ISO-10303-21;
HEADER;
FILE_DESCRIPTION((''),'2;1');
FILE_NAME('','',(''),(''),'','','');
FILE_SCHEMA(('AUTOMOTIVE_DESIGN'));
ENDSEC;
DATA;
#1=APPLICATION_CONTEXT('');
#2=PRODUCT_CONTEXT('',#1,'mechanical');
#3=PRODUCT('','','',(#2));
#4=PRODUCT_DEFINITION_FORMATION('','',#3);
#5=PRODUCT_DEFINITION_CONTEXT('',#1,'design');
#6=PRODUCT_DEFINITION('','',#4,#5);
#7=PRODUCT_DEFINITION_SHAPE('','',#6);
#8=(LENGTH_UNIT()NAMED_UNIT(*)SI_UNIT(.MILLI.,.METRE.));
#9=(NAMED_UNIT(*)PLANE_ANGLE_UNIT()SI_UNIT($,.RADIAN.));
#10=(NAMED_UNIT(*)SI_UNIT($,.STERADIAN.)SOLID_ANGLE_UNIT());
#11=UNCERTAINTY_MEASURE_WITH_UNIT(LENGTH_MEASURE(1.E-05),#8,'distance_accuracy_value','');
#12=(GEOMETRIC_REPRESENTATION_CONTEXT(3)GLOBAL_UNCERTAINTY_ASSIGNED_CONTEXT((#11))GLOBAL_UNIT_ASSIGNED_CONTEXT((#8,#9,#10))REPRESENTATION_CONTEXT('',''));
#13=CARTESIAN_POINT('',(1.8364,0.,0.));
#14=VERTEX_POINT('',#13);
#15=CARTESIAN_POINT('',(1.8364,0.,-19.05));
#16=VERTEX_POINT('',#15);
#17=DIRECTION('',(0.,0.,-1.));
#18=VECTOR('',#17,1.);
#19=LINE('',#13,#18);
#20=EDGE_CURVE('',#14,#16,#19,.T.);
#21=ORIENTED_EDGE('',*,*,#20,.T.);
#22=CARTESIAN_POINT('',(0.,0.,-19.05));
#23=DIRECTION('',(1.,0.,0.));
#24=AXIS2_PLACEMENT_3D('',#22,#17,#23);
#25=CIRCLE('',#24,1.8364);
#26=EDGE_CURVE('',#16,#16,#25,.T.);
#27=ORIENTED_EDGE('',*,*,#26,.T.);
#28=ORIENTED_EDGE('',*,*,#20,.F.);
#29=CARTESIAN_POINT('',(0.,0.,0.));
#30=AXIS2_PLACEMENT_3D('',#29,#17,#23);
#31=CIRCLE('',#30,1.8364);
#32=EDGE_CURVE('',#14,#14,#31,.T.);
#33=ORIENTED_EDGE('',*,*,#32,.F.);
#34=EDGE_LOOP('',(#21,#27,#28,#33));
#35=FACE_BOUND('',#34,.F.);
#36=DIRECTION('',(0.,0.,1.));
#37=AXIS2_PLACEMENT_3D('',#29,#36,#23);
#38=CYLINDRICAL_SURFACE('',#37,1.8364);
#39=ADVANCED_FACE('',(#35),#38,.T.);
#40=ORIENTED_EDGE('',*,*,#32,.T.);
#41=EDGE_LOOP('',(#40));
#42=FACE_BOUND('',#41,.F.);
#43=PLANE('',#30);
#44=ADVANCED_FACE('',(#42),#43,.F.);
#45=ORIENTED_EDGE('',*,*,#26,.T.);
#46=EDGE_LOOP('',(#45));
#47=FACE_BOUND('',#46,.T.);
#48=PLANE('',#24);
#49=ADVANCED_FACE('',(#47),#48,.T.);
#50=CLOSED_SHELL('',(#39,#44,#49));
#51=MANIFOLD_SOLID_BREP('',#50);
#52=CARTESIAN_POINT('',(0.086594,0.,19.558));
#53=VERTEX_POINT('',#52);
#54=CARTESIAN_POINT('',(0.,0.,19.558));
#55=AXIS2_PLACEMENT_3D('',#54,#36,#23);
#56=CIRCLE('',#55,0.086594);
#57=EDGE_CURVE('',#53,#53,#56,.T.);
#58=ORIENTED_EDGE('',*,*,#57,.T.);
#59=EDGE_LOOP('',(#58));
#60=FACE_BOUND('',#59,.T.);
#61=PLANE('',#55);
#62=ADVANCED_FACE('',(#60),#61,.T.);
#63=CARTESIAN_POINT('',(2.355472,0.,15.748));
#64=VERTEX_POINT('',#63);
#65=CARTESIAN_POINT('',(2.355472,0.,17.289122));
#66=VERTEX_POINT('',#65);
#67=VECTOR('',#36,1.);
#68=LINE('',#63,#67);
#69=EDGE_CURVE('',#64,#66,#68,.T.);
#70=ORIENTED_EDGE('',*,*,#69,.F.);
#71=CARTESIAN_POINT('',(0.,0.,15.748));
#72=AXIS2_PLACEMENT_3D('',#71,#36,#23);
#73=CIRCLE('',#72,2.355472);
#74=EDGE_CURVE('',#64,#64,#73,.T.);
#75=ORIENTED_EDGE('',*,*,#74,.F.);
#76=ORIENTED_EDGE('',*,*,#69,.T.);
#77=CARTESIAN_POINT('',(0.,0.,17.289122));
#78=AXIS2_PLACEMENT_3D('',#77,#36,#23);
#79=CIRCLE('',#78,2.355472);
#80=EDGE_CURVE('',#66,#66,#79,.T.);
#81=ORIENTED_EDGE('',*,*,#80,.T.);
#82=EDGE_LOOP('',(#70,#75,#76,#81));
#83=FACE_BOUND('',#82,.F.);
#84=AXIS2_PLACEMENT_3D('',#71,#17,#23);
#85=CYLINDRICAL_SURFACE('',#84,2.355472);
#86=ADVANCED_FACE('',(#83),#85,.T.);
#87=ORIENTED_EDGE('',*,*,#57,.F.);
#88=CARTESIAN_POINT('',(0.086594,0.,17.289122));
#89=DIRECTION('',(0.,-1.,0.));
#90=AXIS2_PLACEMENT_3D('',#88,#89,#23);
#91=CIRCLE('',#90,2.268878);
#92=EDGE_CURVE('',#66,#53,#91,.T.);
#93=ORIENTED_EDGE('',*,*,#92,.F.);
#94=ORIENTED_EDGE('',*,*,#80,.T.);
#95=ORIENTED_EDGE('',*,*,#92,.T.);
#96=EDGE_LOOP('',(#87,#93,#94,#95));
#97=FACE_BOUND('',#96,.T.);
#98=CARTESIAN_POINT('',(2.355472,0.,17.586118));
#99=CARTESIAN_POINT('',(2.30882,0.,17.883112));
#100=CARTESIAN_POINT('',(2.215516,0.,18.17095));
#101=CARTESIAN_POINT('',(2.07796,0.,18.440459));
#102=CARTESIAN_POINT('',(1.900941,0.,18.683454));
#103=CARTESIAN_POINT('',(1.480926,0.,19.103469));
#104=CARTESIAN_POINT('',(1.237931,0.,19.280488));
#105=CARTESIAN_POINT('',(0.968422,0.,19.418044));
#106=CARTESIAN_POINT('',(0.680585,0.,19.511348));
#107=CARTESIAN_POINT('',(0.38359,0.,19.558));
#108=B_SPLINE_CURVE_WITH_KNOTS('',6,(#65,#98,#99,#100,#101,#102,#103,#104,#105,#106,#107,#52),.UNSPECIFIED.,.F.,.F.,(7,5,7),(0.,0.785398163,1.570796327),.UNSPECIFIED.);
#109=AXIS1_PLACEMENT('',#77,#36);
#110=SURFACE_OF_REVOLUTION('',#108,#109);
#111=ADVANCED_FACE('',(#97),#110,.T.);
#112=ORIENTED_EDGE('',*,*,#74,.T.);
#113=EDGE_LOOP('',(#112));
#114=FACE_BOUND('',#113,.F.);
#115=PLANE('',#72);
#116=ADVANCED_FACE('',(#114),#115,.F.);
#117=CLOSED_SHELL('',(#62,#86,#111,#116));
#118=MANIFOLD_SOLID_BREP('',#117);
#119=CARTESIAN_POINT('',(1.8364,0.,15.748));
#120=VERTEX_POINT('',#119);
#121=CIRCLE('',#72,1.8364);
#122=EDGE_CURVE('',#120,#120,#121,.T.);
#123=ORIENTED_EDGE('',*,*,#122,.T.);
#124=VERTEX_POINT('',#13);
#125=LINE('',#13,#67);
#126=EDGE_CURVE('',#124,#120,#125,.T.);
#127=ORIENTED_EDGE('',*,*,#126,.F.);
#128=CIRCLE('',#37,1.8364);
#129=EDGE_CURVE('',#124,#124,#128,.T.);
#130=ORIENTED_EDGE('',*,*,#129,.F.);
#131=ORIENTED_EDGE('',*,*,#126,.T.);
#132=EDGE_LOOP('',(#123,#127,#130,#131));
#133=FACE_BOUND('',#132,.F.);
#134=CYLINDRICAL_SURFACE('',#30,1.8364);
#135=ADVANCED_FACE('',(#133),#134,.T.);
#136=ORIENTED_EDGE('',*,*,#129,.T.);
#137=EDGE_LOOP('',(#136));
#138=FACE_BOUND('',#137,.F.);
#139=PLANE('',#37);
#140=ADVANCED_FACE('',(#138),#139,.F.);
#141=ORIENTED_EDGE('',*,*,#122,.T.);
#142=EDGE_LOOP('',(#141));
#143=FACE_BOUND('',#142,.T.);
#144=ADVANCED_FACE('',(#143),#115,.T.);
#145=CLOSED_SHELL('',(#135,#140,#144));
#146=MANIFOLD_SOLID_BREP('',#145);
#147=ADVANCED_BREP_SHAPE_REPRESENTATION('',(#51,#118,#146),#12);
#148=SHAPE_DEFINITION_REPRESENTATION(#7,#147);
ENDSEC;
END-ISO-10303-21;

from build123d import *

# Parameters (mm, degrees)
F0_R     = 1.8364004546
F1_DEPTH = 15.748
F2_R     = 2.355472205
F2_R_2   = 1.8364004546
F3_DEPTH = 3.81
F4_R     = 2.2688779059
F5_R     = 1.8364004546
F6_DEPTH = 19.05


with BuildPart() as f1:
    # F0 (on Top) → F1 (new body)
    with BuildSketch(Plane.XY):
        Circle(F0_R)
    extrude(amount=F1_DEPTH)


with BuildPart() as f3:
    # F2 (on face) → F3 (new body)
    with BuildSketch(Plane.XY.offset(15.748)):
        Circle(F2_R)
        Circle(F2_R_2, mode=Mode.SUBTRACT)
        Circle(F2_R_2)
    extrude(amount=F3_DEPTH)

    # F4
    f4_edges = [f3.edges().sort_by_distance(p)[0] for p in [
        (-2.355472, 0, 19.558),
    ]]
    fillet(f4_edges, radius=F4_R)


with BuildPart() as f6:
    # F5 (on face) → F6 (new body)
    with BuildSketch(Plane(origin=(0, 0, 0), x_dir=(1, 0, 0), z_dir=(0, 0, -1))):
        Circle(F5_R)
    extrude(amount=F6_DEPTH)


solid = Compound([f1.part, f3.part, f6.part])
